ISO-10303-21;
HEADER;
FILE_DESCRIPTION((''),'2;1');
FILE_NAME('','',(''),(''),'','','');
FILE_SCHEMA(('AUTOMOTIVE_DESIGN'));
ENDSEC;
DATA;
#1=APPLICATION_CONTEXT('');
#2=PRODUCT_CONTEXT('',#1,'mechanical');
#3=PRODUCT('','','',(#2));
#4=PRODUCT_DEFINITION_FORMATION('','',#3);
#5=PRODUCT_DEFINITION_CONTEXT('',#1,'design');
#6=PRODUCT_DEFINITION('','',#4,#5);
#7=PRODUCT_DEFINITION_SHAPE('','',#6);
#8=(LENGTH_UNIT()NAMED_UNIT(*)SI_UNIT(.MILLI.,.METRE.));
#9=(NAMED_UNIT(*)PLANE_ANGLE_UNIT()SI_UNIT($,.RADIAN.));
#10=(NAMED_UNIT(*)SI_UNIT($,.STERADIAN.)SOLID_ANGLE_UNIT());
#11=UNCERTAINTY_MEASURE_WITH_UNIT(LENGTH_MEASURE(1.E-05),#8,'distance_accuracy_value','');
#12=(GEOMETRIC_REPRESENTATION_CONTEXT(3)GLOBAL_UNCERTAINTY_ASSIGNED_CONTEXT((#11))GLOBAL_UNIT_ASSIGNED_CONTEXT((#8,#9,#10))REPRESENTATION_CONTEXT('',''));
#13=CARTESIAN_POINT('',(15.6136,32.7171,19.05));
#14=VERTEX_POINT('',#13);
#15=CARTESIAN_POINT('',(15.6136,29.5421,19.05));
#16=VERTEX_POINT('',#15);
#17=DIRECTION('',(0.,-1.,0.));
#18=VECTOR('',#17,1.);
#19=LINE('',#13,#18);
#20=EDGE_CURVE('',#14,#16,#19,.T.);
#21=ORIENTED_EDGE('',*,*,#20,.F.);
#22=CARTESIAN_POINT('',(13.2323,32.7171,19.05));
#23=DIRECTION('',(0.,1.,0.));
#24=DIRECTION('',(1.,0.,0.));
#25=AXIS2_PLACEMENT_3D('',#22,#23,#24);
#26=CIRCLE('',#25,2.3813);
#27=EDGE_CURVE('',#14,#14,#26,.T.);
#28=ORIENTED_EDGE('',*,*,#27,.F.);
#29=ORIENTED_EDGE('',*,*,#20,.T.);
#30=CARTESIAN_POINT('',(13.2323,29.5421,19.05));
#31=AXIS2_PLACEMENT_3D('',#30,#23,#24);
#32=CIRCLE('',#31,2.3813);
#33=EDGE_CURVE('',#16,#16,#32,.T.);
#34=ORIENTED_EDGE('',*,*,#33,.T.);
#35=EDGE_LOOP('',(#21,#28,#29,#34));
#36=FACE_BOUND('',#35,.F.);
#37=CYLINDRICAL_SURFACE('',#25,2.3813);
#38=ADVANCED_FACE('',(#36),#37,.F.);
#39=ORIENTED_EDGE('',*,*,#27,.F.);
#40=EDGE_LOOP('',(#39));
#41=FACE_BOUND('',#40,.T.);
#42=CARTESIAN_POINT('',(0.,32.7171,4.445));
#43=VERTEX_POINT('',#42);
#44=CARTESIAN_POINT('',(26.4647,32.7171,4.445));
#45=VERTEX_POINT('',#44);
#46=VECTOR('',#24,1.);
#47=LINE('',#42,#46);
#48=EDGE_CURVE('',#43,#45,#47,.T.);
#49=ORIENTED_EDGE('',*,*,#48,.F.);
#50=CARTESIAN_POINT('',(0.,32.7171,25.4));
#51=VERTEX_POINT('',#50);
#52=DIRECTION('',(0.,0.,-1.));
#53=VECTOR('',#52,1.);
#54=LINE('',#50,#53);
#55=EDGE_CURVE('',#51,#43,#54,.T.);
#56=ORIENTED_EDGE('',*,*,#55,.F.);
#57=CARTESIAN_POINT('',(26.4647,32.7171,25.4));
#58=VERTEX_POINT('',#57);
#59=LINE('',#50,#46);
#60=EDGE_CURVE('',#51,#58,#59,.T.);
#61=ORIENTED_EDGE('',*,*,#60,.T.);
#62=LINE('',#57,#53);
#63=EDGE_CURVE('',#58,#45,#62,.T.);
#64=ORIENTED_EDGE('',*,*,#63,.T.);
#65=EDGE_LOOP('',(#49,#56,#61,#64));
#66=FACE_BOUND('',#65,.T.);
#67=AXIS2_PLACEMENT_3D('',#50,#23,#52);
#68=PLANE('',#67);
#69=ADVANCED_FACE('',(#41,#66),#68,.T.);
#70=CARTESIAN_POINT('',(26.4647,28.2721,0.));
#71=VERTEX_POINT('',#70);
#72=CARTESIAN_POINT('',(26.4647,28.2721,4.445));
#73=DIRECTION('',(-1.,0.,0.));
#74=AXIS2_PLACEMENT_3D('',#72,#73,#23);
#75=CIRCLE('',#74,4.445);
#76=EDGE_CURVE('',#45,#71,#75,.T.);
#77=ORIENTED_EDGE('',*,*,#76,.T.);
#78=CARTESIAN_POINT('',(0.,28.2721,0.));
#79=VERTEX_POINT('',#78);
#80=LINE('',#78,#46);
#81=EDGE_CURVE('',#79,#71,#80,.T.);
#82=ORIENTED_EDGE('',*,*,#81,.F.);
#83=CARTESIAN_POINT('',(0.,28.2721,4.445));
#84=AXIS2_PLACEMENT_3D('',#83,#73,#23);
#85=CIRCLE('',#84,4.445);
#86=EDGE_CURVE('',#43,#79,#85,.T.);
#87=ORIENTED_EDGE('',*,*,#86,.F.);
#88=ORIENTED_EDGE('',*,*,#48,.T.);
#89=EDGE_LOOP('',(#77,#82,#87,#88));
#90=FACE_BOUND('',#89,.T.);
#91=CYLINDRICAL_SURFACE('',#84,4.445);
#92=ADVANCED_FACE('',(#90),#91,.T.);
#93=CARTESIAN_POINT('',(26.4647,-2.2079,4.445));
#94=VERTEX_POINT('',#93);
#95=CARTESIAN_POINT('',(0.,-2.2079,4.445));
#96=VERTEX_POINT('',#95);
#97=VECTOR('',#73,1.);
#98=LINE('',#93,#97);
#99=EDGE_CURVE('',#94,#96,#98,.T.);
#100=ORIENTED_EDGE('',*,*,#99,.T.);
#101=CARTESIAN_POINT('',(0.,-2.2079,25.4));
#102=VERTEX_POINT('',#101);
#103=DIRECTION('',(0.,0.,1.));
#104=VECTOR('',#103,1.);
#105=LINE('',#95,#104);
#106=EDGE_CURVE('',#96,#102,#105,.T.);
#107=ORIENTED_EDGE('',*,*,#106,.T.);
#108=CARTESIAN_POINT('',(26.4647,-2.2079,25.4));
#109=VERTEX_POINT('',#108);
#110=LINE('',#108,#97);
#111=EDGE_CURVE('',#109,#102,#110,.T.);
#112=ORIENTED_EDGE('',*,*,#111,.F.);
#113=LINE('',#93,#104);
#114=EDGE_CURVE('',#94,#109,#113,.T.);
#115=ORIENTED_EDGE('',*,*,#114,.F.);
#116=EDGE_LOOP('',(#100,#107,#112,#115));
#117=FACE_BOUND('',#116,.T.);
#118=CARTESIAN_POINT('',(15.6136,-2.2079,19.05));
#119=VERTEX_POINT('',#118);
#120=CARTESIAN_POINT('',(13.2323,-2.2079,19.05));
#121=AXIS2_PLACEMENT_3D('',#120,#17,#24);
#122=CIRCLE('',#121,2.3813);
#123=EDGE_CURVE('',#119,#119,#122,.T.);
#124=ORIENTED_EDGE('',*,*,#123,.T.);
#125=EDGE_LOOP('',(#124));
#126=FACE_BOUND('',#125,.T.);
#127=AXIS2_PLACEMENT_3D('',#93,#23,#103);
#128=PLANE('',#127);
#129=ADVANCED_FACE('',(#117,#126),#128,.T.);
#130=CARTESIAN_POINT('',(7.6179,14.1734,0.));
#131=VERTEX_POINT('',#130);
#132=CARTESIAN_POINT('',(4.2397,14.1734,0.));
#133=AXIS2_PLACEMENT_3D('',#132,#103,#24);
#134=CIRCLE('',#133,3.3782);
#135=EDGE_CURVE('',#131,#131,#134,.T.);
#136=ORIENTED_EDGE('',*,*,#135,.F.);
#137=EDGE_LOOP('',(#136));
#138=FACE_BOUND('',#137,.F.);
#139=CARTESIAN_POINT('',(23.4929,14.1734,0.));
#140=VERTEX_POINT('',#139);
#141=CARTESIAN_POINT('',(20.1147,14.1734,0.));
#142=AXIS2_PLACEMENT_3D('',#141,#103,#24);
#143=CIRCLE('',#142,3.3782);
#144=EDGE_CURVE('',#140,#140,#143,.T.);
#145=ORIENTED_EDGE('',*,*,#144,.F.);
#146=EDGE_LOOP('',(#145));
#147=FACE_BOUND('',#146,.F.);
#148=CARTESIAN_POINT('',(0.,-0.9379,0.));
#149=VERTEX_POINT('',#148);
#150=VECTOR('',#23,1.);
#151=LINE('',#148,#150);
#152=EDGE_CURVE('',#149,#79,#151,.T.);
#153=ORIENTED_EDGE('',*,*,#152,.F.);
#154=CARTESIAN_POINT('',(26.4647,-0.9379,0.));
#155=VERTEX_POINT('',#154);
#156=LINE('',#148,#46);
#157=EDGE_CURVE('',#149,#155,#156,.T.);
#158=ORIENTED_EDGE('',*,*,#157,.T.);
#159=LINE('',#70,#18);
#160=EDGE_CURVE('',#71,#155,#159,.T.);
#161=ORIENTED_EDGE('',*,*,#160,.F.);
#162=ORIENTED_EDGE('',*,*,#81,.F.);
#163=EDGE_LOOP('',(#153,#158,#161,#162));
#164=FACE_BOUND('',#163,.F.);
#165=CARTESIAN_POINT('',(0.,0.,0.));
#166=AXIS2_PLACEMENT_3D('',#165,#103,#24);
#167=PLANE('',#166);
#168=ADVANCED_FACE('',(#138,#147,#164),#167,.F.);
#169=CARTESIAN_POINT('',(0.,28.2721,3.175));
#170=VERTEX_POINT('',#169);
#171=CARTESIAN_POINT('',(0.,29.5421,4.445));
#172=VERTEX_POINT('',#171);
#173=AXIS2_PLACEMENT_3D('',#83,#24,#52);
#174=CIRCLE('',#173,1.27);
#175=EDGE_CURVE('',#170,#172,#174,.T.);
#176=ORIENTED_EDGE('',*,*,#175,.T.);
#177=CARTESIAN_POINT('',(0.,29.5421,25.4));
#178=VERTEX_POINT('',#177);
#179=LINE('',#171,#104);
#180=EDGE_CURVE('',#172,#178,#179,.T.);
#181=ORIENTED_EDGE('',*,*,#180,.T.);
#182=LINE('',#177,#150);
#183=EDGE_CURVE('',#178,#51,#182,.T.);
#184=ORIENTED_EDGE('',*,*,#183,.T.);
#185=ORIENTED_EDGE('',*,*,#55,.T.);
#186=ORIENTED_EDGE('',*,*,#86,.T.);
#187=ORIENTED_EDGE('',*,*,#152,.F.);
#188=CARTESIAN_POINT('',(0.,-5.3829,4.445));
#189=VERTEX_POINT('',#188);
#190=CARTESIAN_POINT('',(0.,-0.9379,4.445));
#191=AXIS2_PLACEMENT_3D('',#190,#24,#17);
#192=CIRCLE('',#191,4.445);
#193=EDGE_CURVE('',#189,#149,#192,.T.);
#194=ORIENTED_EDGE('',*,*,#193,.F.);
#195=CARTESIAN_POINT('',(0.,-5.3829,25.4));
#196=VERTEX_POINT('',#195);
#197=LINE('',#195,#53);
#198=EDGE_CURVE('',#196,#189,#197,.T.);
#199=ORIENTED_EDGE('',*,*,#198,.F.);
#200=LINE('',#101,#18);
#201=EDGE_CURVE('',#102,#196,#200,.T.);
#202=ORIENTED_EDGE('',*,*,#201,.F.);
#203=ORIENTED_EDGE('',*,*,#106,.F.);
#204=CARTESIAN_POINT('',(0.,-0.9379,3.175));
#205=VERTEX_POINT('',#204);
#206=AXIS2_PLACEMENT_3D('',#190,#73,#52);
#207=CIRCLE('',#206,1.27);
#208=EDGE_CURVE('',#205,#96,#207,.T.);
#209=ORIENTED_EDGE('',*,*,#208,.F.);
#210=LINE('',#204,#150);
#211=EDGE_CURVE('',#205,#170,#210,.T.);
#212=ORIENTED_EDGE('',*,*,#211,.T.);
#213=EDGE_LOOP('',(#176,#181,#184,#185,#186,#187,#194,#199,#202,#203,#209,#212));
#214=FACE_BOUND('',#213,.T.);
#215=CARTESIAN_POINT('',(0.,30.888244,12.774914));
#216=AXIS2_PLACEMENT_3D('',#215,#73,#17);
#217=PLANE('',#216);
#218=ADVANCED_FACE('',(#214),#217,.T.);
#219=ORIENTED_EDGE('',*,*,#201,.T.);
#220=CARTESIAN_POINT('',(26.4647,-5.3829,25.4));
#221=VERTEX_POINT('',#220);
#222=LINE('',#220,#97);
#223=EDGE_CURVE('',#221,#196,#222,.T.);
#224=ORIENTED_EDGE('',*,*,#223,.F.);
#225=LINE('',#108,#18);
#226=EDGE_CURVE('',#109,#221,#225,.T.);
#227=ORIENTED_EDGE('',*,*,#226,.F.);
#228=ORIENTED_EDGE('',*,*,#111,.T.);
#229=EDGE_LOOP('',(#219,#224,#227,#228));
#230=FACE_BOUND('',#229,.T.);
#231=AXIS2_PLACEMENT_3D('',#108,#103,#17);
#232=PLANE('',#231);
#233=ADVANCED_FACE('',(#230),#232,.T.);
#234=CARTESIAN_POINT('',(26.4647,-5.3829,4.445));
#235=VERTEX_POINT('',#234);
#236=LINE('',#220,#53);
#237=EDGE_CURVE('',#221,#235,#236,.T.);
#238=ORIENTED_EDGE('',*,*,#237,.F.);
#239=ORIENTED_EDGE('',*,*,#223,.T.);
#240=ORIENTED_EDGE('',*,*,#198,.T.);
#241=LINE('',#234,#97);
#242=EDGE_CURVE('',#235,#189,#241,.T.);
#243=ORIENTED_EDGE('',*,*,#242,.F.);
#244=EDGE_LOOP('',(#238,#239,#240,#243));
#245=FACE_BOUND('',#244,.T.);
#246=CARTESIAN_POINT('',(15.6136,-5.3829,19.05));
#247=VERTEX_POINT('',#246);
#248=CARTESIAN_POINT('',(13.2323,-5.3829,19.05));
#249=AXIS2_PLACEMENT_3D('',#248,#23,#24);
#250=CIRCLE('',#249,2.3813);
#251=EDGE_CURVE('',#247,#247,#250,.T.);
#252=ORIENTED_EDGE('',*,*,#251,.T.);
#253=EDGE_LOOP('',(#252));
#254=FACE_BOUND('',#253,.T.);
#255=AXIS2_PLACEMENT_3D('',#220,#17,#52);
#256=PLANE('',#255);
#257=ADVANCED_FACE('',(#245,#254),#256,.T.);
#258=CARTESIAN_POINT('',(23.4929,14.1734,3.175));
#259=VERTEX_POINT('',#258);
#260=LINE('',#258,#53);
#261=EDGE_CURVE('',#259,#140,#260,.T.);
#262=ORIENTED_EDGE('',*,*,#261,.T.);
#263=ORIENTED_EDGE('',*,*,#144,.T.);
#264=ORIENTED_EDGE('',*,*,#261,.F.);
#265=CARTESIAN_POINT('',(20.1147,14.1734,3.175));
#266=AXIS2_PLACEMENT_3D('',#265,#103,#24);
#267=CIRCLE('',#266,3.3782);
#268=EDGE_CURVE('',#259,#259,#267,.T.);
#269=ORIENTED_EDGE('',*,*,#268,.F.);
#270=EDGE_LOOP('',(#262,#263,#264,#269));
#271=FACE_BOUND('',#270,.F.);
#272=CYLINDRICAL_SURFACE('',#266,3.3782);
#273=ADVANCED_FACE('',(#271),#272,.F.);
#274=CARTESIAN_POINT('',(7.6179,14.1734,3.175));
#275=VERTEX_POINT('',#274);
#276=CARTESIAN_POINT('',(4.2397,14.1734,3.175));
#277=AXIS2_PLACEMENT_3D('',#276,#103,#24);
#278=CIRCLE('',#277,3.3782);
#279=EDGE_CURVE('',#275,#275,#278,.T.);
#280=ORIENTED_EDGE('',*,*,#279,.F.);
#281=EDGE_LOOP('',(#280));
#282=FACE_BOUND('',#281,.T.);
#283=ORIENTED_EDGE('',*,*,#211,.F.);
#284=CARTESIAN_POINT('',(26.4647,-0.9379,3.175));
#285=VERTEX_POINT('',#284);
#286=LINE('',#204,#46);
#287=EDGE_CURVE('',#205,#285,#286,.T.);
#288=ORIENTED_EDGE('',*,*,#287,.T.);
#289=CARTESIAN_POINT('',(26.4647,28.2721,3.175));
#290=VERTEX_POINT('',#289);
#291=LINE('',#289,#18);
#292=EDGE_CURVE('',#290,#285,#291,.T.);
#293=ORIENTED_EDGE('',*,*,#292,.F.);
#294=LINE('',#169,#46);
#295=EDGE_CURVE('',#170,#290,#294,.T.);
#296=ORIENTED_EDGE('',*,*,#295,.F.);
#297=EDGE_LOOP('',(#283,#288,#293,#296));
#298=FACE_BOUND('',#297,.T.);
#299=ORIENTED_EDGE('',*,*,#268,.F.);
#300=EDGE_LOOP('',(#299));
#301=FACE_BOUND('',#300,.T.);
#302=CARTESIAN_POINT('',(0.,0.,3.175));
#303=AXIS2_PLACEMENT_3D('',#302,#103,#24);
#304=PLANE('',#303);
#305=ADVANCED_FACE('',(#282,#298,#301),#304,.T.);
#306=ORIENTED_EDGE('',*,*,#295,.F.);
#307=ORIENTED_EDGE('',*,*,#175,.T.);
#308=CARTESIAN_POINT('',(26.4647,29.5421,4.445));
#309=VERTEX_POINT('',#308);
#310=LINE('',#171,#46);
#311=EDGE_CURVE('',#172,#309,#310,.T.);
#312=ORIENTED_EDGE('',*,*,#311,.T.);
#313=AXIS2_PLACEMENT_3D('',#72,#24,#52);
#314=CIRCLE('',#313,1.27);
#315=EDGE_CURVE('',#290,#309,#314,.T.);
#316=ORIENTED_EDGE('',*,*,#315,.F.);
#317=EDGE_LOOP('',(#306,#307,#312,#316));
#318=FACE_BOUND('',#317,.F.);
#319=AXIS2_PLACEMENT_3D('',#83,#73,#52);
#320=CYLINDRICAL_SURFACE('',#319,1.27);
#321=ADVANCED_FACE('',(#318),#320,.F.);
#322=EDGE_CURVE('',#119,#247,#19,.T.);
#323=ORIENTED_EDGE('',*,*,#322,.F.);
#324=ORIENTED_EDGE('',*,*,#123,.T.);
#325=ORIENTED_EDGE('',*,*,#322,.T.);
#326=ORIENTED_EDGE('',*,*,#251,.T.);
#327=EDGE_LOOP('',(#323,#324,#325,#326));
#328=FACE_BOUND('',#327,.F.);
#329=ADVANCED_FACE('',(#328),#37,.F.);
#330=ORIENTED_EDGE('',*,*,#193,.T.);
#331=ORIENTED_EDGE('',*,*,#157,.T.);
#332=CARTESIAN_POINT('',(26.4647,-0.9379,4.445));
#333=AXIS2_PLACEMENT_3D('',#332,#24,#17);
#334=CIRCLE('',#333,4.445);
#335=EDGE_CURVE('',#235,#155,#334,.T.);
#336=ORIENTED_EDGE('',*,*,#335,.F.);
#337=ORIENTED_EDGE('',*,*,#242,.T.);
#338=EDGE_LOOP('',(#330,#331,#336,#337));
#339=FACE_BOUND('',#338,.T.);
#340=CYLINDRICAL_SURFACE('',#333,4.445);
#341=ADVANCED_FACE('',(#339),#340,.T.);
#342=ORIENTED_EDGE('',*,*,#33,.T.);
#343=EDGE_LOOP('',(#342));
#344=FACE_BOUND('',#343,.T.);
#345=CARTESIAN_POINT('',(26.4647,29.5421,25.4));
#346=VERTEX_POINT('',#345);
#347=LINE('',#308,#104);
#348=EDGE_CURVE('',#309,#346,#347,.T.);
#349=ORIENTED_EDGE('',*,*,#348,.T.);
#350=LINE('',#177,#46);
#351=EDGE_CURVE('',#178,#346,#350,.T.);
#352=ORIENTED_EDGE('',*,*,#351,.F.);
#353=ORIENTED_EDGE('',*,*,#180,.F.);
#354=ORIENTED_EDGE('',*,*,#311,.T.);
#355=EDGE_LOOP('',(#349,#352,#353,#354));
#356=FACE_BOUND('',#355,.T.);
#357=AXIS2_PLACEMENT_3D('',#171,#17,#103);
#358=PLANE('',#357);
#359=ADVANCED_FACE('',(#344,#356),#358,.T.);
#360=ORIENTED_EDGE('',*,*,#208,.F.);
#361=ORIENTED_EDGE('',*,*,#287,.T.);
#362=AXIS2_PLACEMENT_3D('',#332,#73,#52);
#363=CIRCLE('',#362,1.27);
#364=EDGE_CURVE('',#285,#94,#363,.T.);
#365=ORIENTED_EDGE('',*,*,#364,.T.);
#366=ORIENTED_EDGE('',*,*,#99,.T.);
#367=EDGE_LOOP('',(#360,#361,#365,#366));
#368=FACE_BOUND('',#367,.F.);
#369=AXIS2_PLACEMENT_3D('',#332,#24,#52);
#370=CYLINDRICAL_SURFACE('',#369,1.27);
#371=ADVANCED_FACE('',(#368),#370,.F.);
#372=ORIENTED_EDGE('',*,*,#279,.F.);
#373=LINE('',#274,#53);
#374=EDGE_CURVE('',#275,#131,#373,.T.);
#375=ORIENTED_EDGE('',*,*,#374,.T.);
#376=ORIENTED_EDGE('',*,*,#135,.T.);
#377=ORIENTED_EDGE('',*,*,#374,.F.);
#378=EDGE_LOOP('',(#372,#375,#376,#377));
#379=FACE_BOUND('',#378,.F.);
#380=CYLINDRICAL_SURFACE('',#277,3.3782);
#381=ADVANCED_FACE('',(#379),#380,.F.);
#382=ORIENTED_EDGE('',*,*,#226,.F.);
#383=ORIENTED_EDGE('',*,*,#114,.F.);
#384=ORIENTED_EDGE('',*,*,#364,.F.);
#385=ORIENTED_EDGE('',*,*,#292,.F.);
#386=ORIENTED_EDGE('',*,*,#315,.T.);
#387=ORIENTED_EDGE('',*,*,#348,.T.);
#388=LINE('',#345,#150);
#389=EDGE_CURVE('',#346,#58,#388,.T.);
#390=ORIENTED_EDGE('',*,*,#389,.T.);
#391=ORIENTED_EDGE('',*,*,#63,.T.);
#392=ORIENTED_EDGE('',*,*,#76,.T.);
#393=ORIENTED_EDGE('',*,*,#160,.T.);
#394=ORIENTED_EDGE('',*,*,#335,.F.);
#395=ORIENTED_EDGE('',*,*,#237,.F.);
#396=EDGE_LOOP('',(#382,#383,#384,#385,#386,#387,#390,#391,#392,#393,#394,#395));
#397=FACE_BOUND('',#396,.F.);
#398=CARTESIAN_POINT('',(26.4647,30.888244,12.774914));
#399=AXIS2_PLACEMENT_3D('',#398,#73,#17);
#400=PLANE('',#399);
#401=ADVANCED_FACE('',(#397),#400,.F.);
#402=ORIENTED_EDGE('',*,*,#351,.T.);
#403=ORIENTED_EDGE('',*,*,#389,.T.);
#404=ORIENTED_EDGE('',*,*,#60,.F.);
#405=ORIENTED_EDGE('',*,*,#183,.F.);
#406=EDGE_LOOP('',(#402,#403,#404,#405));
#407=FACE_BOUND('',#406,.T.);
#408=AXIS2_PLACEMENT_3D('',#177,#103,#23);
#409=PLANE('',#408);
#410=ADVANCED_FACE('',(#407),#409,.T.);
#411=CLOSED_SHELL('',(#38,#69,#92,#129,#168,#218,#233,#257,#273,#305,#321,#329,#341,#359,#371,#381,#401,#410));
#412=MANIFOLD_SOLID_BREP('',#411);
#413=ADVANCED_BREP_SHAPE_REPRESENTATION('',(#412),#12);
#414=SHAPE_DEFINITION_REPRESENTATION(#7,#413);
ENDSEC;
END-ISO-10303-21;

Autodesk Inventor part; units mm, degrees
ref_plane "YZ Plane" through (0, 0, 0) normal (1, 0, 0) x (0, 1, 0)
ref_plane "XZ Plane" through (0, 0, 0) normal (0, 1, 0) x (-1, 0, 0)
ref_plane "XY Plane" through (0, 0, 0) normal (0, 0, 1) x (1, 0, 0)
sketch "Sketch1" plane through (0, 0, 0) normal (0, 0, 1) x (1, 0, 0)
  circle A0 centre (5.881, 13.6671) radius 3.1287
  circle A1 centre (20.5836, 13.6671) radius 3.1287
  line L0 (0, -0.9379) -> (26.4647, -0.9379)
  line L1 (26.4647, 28.2721) -> (26.4647, -0.9379)
  line L2 (0, 28.2721) -> (26.4647, 28.2721)
  line L3 (0, -0.9379) -> (0, 28.2721)
  point P0 (0, 0)
  dimension "d4" = 14.7026
  dimension "d5" = 29.21
  dimension "d21" = 14.605
extrude "Plate1" add sketch "Sketch1" along normal blind 3.175 contours A0 | A1 | L3 L2 L1 L0
sketch "Sketch2" plane through (0, 29.5421, 4.445) normal (0, 1, 0) x (-1, 0, 0)
  line L0 (-26.4647, 0) -> (0, 0)
  line L1 (0, 0) -> (0, 20.955)
  line L2 (0, 20.955) -> (-26.4647, 20.955)
  line L3 (-26.4647, 20.955) -> (-26.4647, 0)
edge flange "Flange1" height 25.4 angle 90 thickness 3.175 bend radius 1.27 thickness toward (0, 1, 0) relief straight relief width 3.175 relief depth 1.5875 corner gap 3.175 corner form 0 edges at (13.2323, 28.2721, 3.175) (13.2323, -0.9379, 3.175) wall of the first edge with corners at (26.4647, 29.5421, 4.445) (0, 29.5421, 4.445) (0, 29.5421, 25.4) (26.4647, 29.5421, 25.4)
bend "Bend1"
corner "Corner1"
sketch "Sketch3" plane through (0, 32.7171, 25.4) normal (0, 1, 0) x (1, 0, 0)
  line L0 (26.4647, 0) -> (0, 0) projected
  line L1 (26.4647, 20.955) -> (26.4647, 0) projected
  line L2 (13.2323, 0) -> (13.2323, 6.35)
  circle A0 centre (13.2323, 6.35) radius 2.3813
  point P0 (0, 25.4)
  dimension "d17" = 6.35
  dimension "d18" = 4.7625
extrude "Extrusion1" cut sketch "Sketch3" against normal blind 76174.6
sketch "Sketch5" plane through (0, 0, 3.175) normal (0, 0, 1) x (1, 0, 0)
  circle A0 centre (20.1147, 14.1734) radius 3.3782 projected
  circle A1 centre (4.2397, 14.1734) radius 3.3782 projected
  point P0 (0, 0)
extrude "Cut1" cut sketch "Sketch5" against normal blind 3.175
equation "\"d22\" = Thickness"
equation "\"d7\" = BendReliefWidth"
equation "\"d8\" = BendReliefDepth"
equation "\"d9\" = MinimumRemnant"
equation "\"d10\" = BendRadius"
equation "\"d14\" = CornerReliefSize"
equation "\"d15\" = GapSize"
equation "\"d16\" = JacobiRadiusSize"
equation "\"BendRadius\" = Thickness"
equation "\"BendReliefWidth\" = Thickness"
equation "\"BendReliefDepth\" = 0.5 * Thickness"
equation "\"CornerReliefSize\" = 4 * Thickness"
equation "\"MinimumRemnant\" = 2 * Thickness"
equation "\"TransitionRadius\" = BendRadius"
equation "\"JacobiRadiusSize\" = Thickness"
equation "\"GapSize\" = Thickness"
equation "\"d6\" = BendRadius"
equation "\"Thickness\" = 3.175"
properties part number "pulley mount. actual ipt" material "Aluminum 6061"
